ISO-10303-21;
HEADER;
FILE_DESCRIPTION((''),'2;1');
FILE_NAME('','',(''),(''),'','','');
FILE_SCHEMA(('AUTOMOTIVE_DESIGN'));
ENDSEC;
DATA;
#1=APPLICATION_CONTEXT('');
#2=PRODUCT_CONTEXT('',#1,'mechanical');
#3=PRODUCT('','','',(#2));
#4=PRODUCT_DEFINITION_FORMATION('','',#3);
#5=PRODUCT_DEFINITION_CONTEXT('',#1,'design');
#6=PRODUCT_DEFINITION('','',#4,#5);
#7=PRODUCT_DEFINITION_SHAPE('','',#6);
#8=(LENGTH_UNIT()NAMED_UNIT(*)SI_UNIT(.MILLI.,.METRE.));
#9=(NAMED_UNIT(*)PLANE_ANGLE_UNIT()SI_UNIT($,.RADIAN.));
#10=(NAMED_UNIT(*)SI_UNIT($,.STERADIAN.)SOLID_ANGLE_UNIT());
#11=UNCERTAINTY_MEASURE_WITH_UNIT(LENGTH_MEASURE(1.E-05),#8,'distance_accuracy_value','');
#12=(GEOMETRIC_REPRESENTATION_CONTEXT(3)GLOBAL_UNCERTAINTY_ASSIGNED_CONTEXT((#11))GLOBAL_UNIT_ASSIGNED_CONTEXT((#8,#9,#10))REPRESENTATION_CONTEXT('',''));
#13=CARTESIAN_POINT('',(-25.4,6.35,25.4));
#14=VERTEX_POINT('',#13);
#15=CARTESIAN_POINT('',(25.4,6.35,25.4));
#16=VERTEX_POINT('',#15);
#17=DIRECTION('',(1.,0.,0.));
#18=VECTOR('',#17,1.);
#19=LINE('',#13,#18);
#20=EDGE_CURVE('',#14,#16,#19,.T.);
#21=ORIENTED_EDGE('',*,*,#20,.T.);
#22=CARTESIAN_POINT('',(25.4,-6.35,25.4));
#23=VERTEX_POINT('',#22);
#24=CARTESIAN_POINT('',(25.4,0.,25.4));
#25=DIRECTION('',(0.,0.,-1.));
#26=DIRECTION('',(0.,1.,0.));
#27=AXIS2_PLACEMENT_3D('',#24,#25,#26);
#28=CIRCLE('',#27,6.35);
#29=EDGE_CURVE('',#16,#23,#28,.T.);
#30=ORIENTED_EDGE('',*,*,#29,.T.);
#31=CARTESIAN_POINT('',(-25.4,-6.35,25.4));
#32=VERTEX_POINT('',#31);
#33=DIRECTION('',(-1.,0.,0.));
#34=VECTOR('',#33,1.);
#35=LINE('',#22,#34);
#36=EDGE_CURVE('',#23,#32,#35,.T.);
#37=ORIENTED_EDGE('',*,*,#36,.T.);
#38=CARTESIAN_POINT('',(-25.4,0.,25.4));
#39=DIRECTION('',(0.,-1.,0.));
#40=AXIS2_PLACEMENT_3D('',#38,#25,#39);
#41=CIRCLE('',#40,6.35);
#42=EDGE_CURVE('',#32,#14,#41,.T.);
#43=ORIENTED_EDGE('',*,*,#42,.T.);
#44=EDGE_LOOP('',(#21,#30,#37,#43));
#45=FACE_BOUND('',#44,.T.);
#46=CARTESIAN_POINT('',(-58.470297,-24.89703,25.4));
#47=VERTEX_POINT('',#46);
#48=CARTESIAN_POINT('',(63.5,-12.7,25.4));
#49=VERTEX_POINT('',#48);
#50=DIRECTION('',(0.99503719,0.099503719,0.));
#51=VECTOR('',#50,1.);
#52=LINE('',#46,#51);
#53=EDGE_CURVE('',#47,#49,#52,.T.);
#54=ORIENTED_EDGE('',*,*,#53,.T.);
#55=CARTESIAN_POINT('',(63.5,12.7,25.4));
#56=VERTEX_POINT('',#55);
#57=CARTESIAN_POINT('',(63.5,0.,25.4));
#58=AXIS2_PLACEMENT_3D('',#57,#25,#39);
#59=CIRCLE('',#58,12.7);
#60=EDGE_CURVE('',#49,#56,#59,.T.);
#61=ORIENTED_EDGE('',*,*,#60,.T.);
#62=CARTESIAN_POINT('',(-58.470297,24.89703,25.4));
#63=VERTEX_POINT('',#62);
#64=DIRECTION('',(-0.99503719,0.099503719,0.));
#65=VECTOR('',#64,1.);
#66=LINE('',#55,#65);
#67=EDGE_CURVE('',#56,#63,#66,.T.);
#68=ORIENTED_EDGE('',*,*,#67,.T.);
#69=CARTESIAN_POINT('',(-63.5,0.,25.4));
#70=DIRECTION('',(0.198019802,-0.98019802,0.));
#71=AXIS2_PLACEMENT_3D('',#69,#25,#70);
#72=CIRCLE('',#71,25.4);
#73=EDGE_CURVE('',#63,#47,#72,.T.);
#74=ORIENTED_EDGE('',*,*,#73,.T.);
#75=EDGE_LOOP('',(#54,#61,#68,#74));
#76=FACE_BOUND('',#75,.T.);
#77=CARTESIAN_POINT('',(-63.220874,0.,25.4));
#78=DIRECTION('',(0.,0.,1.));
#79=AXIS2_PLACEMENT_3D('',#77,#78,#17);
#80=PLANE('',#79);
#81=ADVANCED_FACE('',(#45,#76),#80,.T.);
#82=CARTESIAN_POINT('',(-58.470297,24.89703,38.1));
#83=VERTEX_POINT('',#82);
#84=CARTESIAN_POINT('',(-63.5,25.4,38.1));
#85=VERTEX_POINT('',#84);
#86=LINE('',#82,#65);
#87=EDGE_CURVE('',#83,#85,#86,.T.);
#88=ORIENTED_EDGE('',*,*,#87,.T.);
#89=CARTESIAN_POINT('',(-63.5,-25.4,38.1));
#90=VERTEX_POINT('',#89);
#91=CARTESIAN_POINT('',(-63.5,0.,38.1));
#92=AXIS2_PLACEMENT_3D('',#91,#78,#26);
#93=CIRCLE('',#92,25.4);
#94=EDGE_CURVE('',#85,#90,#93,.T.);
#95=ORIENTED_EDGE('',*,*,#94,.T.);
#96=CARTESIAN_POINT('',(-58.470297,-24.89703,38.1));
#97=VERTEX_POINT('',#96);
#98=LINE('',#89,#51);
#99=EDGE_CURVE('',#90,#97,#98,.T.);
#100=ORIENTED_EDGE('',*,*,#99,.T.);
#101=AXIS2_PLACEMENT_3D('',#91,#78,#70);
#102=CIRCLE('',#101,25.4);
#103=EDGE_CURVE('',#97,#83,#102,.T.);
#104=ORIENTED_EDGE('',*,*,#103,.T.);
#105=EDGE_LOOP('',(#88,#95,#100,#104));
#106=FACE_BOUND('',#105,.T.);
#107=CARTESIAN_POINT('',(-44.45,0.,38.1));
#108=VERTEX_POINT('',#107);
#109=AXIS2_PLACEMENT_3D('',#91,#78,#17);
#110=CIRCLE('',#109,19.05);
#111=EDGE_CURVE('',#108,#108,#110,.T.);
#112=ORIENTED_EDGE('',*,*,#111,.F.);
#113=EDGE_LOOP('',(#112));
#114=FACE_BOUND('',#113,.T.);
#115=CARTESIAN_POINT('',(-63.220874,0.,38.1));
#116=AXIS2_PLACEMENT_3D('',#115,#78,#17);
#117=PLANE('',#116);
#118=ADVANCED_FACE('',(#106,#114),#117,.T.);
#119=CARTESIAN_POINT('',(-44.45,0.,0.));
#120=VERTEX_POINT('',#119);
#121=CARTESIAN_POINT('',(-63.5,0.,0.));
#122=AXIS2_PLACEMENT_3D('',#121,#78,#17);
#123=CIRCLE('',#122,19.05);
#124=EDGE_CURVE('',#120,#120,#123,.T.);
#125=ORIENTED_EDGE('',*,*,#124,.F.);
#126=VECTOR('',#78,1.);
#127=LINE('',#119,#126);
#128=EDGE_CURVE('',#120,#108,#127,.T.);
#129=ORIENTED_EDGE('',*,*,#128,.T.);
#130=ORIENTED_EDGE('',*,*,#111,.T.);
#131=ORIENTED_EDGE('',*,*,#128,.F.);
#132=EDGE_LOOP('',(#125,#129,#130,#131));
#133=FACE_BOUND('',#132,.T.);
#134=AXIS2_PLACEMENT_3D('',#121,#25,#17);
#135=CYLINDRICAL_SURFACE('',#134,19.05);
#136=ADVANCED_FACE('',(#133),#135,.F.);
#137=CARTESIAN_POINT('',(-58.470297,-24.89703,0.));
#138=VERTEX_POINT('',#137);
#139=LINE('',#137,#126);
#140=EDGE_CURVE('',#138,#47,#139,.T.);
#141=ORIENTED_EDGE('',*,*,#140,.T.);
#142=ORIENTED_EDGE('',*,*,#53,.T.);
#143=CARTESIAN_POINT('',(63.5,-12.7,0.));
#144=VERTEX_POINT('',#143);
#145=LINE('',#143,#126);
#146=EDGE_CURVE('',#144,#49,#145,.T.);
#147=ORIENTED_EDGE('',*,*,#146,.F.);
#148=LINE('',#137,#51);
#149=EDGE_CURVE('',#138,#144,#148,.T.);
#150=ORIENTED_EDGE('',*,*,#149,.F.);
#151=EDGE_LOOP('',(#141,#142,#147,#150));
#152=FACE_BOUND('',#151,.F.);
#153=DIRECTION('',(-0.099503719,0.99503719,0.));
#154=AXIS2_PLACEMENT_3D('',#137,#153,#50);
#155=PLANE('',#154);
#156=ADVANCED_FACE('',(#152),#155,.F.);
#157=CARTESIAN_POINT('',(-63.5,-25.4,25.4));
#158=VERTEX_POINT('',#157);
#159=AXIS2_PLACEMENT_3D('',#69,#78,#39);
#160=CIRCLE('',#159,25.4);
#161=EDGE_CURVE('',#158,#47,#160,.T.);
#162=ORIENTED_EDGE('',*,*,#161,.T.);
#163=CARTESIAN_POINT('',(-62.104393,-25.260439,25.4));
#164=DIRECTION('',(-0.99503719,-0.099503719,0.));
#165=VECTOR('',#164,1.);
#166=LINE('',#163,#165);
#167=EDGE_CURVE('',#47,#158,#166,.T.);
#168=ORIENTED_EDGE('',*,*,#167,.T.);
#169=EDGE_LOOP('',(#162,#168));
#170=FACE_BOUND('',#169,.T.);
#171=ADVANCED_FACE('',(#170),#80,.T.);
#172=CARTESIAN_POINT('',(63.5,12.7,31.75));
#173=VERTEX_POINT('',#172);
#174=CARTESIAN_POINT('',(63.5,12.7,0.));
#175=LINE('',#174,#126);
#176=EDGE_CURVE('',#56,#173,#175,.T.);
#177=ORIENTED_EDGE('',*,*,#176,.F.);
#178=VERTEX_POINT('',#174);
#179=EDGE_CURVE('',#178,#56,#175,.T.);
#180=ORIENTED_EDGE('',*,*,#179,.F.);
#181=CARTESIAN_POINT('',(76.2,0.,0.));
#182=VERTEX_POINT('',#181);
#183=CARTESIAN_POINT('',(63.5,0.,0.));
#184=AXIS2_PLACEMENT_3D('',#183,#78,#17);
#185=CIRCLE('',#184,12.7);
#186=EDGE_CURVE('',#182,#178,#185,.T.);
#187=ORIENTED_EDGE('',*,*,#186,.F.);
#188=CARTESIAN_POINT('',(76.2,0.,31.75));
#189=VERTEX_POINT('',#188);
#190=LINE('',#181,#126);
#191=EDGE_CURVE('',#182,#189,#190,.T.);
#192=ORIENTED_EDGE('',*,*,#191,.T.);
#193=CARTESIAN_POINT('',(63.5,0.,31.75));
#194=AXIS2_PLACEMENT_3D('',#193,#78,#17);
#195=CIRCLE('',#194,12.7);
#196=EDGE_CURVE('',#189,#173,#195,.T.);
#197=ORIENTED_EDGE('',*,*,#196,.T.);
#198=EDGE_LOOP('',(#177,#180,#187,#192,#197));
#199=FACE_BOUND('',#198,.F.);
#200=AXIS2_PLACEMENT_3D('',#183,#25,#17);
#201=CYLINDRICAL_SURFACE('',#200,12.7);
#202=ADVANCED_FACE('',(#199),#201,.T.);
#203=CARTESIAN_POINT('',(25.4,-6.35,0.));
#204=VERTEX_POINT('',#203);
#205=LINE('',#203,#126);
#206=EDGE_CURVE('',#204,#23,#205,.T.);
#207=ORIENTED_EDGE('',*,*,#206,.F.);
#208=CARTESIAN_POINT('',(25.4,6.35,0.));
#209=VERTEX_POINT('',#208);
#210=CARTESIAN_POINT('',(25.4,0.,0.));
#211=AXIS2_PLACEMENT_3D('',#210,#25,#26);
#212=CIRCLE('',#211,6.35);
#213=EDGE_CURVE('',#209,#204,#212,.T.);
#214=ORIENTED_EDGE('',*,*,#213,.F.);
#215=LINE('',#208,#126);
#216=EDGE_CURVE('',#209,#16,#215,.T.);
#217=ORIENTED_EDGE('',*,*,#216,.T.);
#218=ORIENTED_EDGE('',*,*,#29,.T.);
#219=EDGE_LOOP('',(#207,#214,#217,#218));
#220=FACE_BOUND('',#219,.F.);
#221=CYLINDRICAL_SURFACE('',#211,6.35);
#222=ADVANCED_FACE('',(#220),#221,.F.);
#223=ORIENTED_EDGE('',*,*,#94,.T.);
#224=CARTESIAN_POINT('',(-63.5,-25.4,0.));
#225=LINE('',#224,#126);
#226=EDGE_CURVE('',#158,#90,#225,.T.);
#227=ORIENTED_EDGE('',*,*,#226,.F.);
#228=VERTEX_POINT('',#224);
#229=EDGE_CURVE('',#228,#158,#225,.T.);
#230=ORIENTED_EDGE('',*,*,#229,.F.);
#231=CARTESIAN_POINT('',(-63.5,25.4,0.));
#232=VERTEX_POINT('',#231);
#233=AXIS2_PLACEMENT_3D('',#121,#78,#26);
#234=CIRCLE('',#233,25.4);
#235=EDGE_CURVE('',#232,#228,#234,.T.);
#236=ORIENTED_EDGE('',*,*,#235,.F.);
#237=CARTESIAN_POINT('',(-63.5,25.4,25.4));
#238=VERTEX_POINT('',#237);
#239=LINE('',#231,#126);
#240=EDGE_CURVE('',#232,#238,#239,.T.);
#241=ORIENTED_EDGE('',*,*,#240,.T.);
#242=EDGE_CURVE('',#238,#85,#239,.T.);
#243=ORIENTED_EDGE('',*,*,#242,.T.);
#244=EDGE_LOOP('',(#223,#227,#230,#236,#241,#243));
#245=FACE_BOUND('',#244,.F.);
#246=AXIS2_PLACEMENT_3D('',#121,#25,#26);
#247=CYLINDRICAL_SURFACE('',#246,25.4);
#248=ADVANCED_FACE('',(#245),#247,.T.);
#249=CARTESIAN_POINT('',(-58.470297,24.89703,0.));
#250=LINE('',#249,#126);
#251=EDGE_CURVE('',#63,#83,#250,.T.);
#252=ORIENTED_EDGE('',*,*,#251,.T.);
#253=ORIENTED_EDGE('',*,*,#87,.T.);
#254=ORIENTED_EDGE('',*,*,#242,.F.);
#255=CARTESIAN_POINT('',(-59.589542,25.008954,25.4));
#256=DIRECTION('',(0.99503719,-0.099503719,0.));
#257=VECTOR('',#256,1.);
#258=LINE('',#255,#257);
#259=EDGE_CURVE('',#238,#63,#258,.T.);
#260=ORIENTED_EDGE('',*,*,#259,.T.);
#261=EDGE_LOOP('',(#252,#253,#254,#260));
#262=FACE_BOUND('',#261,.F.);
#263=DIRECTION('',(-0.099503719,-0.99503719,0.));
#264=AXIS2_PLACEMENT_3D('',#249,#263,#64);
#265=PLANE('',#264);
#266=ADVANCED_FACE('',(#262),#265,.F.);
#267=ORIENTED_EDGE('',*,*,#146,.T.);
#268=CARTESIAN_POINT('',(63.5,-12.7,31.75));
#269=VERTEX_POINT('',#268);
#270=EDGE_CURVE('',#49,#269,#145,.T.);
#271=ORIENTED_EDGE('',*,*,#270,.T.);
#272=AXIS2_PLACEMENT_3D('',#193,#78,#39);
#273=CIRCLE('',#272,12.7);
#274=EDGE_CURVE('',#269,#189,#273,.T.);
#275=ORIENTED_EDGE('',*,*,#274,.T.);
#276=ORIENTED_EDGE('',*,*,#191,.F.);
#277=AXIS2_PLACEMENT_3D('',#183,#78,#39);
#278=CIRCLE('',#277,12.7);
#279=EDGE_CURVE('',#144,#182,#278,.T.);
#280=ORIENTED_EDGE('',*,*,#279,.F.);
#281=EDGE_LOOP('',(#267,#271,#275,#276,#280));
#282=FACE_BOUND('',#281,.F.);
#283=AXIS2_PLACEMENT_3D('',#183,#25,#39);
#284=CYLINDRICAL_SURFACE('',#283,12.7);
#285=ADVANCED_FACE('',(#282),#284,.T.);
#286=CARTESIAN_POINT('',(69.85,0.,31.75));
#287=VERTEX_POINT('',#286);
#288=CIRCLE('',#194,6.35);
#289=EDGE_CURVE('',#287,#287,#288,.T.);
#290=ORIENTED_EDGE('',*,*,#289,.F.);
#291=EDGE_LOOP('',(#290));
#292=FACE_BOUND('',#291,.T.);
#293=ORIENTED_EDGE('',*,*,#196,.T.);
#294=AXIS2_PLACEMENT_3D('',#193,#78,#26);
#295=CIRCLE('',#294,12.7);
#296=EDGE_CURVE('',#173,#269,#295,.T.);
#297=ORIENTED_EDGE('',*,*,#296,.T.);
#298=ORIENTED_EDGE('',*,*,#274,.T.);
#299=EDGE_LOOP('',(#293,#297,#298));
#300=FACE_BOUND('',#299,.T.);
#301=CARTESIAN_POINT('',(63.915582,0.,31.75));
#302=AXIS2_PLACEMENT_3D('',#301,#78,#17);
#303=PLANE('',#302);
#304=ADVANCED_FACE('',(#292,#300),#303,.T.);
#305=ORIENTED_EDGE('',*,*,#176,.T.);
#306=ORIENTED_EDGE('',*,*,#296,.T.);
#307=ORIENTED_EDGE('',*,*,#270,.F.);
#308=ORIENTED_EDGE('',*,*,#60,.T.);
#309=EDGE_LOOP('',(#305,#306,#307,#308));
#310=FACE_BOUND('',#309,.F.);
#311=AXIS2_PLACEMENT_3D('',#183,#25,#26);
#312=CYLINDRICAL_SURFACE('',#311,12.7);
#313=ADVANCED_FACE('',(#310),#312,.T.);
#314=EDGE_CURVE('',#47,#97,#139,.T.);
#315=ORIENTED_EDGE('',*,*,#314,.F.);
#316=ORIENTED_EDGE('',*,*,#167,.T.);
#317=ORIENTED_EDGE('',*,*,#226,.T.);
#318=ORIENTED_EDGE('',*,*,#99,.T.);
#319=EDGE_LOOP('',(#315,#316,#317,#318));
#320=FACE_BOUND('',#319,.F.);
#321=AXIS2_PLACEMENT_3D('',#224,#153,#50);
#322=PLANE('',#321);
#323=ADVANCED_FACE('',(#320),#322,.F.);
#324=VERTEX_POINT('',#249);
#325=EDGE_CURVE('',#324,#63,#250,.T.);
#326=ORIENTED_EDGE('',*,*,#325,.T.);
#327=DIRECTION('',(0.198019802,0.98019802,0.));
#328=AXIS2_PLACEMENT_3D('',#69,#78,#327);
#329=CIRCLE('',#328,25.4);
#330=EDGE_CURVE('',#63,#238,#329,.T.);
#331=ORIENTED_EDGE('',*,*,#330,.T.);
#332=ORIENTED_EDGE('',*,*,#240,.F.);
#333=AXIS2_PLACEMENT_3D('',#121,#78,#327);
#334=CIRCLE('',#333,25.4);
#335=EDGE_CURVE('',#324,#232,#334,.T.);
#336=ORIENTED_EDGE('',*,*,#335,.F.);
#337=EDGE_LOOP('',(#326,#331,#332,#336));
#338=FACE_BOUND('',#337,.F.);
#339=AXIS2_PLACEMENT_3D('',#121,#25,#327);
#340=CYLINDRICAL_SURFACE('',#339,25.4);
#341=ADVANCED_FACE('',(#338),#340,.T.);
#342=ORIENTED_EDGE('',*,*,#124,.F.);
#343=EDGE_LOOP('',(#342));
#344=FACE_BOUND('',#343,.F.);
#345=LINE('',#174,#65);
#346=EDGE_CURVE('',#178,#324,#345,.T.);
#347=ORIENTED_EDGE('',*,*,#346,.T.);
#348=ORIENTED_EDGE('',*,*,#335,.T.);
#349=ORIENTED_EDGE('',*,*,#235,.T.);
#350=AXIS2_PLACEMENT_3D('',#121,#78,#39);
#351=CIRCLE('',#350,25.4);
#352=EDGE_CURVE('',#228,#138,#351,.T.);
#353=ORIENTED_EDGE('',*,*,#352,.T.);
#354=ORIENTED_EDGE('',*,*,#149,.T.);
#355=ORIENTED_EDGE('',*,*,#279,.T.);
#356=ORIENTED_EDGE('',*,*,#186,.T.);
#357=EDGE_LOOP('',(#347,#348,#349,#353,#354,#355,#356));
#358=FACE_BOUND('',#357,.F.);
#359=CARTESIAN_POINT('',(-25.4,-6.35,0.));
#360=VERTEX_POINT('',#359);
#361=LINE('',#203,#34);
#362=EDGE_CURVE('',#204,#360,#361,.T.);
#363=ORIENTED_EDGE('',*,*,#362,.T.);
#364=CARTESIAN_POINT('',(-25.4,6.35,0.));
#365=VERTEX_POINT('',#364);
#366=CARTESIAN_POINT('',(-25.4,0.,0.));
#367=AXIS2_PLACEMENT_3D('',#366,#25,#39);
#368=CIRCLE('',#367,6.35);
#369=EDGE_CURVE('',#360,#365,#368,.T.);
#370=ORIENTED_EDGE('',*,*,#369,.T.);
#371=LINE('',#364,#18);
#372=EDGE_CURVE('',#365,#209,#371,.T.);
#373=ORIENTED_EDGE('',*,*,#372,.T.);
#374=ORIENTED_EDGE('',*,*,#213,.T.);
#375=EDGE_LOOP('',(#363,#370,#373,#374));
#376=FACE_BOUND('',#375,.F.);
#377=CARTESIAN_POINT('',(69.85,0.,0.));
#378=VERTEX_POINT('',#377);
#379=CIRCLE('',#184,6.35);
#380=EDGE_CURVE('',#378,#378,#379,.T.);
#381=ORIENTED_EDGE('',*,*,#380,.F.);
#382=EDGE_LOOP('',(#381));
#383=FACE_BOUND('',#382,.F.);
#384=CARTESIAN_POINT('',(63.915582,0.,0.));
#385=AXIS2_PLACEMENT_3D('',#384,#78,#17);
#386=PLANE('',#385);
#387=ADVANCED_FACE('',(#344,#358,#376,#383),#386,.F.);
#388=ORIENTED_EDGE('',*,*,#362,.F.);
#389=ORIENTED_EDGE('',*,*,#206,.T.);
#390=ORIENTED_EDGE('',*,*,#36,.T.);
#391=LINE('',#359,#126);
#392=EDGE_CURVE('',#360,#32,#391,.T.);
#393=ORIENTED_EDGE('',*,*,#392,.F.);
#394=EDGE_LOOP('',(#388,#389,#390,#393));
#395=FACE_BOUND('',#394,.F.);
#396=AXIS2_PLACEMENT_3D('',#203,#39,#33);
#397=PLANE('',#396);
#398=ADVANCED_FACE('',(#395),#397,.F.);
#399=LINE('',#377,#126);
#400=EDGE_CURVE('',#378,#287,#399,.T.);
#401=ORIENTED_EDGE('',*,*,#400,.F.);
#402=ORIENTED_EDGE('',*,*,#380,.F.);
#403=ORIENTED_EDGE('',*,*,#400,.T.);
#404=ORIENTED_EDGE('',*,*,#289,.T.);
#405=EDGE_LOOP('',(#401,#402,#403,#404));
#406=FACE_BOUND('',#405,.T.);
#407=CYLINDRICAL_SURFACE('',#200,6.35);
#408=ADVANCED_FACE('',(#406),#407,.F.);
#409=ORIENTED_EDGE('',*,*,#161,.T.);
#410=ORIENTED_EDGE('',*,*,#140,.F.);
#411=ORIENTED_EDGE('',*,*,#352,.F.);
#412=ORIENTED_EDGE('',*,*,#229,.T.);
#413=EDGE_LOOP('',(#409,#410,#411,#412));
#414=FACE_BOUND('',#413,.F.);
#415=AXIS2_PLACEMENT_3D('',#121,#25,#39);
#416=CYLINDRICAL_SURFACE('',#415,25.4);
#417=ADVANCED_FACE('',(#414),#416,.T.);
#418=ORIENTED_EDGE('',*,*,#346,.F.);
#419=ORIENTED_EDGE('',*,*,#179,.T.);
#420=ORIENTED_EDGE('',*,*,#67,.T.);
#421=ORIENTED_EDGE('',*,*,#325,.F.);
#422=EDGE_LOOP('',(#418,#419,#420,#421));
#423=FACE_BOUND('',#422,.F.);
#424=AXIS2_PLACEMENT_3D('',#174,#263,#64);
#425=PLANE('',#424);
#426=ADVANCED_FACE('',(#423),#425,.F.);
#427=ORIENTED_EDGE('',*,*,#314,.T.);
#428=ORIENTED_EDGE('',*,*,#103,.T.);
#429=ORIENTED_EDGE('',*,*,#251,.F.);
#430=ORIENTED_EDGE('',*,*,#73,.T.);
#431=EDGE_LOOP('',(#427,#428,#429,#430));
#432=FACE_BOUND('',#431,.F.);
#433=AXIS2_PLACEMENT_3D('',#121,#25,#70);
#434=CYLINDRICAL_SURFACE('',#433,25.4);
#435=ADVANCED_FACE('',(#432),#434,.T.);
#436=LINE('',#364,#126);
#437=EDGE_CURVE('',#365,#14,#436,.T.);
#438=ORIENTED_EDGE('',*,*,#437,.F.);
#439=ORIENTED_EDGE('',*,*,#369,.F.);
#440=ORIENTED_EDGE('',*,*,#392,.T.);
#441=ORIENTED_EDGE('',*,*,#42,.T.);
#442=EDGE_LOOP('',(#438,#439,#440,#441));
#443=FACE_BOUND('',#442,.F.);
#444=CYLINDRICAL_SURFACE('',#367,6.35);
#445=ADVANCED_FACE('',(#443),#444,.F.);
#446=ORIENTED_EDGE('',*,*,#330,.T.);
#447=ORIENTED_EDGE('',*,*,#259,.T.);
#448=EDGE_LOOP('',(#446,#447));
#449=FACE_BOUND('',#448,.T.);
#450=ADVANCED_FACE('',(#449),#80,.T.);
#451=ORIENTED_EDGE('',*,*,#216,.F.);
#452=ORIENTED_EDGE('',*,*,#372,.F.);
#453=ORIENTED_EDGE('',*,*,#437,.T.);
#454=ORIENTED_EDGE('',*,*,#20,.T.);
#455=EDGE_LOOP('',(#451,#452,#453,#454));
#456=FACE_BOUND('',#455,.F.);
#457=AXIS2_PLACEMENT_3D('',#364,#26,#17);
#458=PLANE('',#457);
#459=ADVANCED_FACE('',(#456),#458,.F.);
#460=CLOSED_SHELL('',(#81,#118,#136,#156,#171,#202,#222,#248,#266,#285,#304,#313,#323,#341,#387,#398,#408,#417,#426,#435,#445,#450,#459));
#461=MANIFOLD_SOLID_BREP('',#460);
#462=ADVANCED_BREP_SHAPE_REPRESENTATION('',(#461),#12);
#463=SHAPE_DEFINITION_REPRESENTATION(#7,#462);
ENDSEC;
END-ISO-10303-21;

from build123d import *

# Parameters (mm, degrees)
F0_R     = 19.05
F1_DEPTH = 25.4
F2_DEPTH = 38.1
F0_R_2   = 6.35
F3_DEPTH = 31.75


with BuildPart() as f1:
    # F0 (on Top) → F1 (new body)
    with BuildSketch(Plane.XY):
        with BuildLine():
            Line((-58.4702970297, 24.897029703), (-63.5, 25.4))
            ThreePointArc((-63.5, 25.4), (-88.9, 0), (-63.5, -25.4))
            Line((-63.5, -25.4), (-58.4702970297, -24.897029703))
            ThreePointArc((-58.4702970297, -24.897029703), (-43.8414846002, -16.0842398725), (-38.1, 0))
            ThreePointArc((-38.1, 0), (-43.8414846002, 16.0842398725), (-58.4702970297, 24.897029703))
        make_face()
        with Locations((-63.5, 0)):
            Circle(F0_R, mode=Mode.SUBTRACT)
        with BuildLine():
            ThreePointArc((-58.4702970297, 24.897029703), (-60.9726055369, 25.2739446313), (-63.5, 25.4))
            Line((-63.5, 25.4), (-58.4702970297, 24.897029703))
        make_face()
        with BuildLine():
            Line((-58.4702970297, -24.897029703), (-63.5, -25.4))
            ThreePointArc((-63.5, -25.4), (-60.9726055369, -25.2739446313), (-58.4702970297, -24.897029703))
        make_face()
        with BuildLine():
            Line((63.5, 12.7), (-58.4702970297, 24.897029703))
            ThreePointArc((-58.4702970297, 24.897029703), (-43.8414846002, 16.0842398725), (-38.1, 0))
            ThreePointArc((-38.1, 0), (-43.8414846002, -16.0842398725), (-58.4702970297, -24.897029703))
            Line((-58.4702970297, -24.897029703), (63.5, -12.7))
            ThreePointArc((63.5, -12.7), (50.8, 0), (63.5, 12.7))
        make_face()
        with BuildLine():
            ThreePointArc((-25.4, -6.35), (-31.75, 0), (-25.4, 6.35))
            Line((-25.4, 6.35), (25.4, 6.35))
            ThreePointArc((25.4, 6.35), (31.75, 0), (25.4, -6.35))
            Line((25.4, -6.35), (-25.4, -6.35))
        make_face(mode=Mode.SUBTRACT)
    extrude(amount=F1_DEPTH)

    # F0 (on Top) → F2 (join)
    with BuildSketch(Plane.XY):
        with BuildLine():
            Line((-58.4702970297, 24.897029703), (-63.5, 25.4))
            ThreePointArc((-63.5, 25.4), (-88.9, 0), (-63.5, -25.4))
            Line((-63.5, -25.4), (-58.4702970297, -24.897029703))
            ThreePointArc((-58.4702970297, -24.897029703), (-43.8414846002, -16.0842398725), (-38.1, 0))
            ThreePointArc((-38.1, 0), (-43.8414846002, 16.0842398725), (-58.4702970297, 24.897029703))
        make_face()
        with Locations((-63.5, 0)):
            Circle(F0_R, mode=Mode.SUBTRACT)
    extrude(amount=F2_DEPTH)

    # F0 (on Top) → F3 (join)
    with BuildSketch(Plane.XY):
        with BuildLine():
            ThreePointArc((76.2, 0), (72.4802561211, 8.9802561211), (63.5, 12.7))
            ThreePointArc((63.5, 12.7), (50.8, 0), (63.5, -12.7))
            ThreePointArc((63.5, -12.7), (72.4802561211, -8.9802561211), (76.2, 0))
        make_face()
        with Locations((63.5, 0)):
            Circle(F0_R_2, mode=Mode.SUBTRACT)
    extrude(amount=F3_DEPTH)


solid = f1.part
